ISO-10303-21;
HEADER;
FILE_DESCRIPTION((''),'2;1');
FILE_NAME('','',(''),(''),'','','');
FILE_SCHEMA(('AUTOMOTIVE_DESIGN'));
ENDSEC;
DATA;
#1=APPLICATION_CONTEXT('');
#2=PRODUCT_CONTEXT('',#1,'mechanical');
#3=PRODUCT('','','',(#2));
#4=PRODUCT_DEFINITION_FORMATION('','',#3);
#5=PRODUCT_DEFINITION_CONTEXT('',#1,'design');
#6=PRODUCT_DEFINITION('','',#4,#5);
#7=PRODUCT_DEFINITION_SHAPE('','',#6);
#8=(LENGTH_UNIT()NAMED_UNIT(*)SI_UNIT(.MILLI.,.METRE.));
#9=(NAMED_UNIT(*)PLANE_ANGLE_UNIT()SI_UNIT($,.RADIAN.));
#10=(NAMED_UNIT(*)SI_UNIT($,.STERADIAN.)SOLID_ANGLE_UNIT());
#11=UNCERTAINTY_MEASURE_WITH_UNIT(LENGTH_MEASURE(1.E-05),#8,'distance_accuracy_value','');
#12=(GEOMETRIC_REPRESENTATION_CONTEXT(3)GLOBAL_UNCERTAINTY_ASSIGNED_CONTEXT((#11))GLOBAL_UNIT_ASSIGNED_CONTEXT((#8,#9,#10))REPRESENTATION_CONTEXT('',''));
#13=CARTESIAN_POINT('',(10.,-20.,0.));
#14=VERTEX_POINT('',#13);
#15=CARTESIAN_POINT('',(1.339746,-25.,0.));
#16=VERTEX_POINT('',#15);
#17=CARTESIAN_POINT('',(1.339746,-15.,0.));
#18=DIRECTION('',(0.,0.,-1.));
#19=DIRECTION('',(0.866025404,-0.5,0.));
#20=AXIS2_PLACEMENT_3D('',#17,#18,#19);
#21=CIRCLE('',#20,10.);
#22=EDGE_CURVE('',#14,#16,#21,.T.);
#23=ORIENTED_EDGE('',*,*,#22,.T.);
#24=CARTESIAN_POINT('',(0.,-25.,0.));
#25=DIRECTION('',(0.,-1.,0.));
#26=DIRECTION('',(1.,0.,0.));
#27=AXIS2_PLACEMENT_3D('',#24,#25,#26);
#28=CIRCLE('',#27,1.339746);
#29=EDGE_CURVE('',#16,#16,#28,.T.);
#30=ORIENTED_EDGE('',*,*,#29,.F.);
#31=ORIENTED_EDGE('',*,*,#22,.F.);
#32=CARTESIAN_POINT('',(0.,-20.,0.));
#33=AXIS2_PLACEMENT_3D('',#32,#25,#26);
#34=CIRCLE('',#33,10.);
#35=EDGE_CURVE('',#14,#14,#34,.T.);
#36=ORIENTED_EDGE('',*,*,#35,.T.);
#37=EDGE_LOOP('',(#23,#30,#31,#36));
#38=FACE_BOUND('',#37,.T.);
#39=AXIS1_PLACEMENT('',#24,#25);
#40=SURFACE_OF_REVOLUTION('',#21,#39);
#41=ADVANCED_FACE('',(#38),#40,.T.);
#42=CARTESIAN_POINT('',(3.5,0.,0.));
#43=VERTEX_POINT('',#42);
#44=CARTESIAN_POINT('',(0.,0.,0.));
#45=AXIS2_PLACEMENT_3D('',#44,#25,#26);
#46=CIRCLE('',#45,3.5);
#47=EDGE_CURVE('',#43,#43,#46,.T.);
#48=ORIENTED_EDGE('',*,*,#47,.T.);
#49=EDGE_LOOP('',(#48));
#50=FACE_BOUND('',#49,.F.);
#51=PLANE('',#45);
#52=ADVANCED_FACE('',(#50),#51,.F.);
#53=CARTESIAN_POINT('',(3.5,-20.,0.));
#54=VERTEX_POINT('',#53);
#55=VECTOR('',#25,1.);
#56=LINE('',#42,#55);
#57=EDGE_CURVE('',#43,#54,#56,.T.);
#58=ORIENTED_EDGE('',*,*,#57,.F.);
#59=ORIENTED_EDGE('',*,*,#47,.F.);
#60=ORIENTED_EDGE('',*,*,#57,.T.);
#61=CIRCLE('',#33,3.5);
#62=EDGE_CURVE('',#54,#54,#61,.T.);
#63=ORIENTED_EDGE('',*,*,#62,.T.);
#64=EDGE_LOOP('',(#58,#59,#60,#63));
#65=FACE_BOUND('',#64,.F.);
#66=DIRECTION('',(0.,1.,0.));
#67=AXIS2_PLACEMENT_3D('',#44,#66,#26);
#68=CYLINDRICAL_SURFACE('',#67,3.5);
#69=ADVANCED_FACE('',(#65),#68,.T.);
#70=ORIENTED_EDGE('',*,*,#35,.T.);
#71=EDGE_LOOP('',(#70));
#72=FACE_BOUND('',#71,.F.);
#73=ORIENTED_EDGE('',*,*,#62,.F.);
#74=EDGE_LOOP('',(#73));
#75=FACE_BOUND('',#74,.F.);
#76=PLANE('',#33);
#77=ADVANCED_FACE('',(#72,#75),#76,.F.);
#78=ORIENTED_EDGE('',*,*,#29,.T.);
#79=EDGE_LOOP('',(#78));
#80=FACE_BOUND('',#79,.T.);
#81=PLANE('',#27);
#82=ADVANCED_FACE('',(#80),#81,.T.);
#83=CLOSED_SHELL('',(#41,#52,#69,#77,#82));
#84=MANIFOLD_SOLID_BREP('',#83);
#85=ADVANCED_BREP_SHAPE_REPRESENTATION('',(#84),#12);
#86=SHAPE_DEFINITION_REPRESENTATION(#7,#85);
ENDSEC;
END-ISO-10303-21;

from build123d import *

# Parameters (mm, degrees)
F0_R     = 3.5
F1_DEPTH = 20
F2_R     = 10
F2_R_2   = 3.5
F3_DEPTH = 5


# Not quite as in the source:
# - a fillet or chamfer that OpenCascade refuses, or shapes differently, is made with other operations: its cross-section is extruded or revolved along the edge and cut away or added


with BuildPart() as f1:
    # F0 (on Front) → F1 (new body)
    with BuildSketch(Plane.XZ):
        Circle(F0_R)
    extrude(amount=F1_DEPTH)

    # F2 (on face) → F3 (join)
    with BuildSketch(Plane.XZ.offset(20)):
        Circle(F2_R)
        Circle(F2_R_2, mode=Mode.SUBTRACT)
        Circle(F2_R_2)
    extrude(amount=F3_DEPTH)

    # F4: fillet of radius 10 on 1 edges, made by hand

    # F4_s1 → F4_t2 (revolve, cut)
    with BuildSketch(Plane.XY):
        with BuildLine():
            ThreePointArc((10, -20), (6.3397459622, -23.6602540378), (1.3397459622, -25))
            Line((1.3397459622, -25), (10, -25))
            Line((10, -25), (10, -20))
        make_face()
    revolve(axis=Axis((0, -25, 0), (0, -1, 0)), mode=Mode.SUBTRACT)


solid = f1.part
